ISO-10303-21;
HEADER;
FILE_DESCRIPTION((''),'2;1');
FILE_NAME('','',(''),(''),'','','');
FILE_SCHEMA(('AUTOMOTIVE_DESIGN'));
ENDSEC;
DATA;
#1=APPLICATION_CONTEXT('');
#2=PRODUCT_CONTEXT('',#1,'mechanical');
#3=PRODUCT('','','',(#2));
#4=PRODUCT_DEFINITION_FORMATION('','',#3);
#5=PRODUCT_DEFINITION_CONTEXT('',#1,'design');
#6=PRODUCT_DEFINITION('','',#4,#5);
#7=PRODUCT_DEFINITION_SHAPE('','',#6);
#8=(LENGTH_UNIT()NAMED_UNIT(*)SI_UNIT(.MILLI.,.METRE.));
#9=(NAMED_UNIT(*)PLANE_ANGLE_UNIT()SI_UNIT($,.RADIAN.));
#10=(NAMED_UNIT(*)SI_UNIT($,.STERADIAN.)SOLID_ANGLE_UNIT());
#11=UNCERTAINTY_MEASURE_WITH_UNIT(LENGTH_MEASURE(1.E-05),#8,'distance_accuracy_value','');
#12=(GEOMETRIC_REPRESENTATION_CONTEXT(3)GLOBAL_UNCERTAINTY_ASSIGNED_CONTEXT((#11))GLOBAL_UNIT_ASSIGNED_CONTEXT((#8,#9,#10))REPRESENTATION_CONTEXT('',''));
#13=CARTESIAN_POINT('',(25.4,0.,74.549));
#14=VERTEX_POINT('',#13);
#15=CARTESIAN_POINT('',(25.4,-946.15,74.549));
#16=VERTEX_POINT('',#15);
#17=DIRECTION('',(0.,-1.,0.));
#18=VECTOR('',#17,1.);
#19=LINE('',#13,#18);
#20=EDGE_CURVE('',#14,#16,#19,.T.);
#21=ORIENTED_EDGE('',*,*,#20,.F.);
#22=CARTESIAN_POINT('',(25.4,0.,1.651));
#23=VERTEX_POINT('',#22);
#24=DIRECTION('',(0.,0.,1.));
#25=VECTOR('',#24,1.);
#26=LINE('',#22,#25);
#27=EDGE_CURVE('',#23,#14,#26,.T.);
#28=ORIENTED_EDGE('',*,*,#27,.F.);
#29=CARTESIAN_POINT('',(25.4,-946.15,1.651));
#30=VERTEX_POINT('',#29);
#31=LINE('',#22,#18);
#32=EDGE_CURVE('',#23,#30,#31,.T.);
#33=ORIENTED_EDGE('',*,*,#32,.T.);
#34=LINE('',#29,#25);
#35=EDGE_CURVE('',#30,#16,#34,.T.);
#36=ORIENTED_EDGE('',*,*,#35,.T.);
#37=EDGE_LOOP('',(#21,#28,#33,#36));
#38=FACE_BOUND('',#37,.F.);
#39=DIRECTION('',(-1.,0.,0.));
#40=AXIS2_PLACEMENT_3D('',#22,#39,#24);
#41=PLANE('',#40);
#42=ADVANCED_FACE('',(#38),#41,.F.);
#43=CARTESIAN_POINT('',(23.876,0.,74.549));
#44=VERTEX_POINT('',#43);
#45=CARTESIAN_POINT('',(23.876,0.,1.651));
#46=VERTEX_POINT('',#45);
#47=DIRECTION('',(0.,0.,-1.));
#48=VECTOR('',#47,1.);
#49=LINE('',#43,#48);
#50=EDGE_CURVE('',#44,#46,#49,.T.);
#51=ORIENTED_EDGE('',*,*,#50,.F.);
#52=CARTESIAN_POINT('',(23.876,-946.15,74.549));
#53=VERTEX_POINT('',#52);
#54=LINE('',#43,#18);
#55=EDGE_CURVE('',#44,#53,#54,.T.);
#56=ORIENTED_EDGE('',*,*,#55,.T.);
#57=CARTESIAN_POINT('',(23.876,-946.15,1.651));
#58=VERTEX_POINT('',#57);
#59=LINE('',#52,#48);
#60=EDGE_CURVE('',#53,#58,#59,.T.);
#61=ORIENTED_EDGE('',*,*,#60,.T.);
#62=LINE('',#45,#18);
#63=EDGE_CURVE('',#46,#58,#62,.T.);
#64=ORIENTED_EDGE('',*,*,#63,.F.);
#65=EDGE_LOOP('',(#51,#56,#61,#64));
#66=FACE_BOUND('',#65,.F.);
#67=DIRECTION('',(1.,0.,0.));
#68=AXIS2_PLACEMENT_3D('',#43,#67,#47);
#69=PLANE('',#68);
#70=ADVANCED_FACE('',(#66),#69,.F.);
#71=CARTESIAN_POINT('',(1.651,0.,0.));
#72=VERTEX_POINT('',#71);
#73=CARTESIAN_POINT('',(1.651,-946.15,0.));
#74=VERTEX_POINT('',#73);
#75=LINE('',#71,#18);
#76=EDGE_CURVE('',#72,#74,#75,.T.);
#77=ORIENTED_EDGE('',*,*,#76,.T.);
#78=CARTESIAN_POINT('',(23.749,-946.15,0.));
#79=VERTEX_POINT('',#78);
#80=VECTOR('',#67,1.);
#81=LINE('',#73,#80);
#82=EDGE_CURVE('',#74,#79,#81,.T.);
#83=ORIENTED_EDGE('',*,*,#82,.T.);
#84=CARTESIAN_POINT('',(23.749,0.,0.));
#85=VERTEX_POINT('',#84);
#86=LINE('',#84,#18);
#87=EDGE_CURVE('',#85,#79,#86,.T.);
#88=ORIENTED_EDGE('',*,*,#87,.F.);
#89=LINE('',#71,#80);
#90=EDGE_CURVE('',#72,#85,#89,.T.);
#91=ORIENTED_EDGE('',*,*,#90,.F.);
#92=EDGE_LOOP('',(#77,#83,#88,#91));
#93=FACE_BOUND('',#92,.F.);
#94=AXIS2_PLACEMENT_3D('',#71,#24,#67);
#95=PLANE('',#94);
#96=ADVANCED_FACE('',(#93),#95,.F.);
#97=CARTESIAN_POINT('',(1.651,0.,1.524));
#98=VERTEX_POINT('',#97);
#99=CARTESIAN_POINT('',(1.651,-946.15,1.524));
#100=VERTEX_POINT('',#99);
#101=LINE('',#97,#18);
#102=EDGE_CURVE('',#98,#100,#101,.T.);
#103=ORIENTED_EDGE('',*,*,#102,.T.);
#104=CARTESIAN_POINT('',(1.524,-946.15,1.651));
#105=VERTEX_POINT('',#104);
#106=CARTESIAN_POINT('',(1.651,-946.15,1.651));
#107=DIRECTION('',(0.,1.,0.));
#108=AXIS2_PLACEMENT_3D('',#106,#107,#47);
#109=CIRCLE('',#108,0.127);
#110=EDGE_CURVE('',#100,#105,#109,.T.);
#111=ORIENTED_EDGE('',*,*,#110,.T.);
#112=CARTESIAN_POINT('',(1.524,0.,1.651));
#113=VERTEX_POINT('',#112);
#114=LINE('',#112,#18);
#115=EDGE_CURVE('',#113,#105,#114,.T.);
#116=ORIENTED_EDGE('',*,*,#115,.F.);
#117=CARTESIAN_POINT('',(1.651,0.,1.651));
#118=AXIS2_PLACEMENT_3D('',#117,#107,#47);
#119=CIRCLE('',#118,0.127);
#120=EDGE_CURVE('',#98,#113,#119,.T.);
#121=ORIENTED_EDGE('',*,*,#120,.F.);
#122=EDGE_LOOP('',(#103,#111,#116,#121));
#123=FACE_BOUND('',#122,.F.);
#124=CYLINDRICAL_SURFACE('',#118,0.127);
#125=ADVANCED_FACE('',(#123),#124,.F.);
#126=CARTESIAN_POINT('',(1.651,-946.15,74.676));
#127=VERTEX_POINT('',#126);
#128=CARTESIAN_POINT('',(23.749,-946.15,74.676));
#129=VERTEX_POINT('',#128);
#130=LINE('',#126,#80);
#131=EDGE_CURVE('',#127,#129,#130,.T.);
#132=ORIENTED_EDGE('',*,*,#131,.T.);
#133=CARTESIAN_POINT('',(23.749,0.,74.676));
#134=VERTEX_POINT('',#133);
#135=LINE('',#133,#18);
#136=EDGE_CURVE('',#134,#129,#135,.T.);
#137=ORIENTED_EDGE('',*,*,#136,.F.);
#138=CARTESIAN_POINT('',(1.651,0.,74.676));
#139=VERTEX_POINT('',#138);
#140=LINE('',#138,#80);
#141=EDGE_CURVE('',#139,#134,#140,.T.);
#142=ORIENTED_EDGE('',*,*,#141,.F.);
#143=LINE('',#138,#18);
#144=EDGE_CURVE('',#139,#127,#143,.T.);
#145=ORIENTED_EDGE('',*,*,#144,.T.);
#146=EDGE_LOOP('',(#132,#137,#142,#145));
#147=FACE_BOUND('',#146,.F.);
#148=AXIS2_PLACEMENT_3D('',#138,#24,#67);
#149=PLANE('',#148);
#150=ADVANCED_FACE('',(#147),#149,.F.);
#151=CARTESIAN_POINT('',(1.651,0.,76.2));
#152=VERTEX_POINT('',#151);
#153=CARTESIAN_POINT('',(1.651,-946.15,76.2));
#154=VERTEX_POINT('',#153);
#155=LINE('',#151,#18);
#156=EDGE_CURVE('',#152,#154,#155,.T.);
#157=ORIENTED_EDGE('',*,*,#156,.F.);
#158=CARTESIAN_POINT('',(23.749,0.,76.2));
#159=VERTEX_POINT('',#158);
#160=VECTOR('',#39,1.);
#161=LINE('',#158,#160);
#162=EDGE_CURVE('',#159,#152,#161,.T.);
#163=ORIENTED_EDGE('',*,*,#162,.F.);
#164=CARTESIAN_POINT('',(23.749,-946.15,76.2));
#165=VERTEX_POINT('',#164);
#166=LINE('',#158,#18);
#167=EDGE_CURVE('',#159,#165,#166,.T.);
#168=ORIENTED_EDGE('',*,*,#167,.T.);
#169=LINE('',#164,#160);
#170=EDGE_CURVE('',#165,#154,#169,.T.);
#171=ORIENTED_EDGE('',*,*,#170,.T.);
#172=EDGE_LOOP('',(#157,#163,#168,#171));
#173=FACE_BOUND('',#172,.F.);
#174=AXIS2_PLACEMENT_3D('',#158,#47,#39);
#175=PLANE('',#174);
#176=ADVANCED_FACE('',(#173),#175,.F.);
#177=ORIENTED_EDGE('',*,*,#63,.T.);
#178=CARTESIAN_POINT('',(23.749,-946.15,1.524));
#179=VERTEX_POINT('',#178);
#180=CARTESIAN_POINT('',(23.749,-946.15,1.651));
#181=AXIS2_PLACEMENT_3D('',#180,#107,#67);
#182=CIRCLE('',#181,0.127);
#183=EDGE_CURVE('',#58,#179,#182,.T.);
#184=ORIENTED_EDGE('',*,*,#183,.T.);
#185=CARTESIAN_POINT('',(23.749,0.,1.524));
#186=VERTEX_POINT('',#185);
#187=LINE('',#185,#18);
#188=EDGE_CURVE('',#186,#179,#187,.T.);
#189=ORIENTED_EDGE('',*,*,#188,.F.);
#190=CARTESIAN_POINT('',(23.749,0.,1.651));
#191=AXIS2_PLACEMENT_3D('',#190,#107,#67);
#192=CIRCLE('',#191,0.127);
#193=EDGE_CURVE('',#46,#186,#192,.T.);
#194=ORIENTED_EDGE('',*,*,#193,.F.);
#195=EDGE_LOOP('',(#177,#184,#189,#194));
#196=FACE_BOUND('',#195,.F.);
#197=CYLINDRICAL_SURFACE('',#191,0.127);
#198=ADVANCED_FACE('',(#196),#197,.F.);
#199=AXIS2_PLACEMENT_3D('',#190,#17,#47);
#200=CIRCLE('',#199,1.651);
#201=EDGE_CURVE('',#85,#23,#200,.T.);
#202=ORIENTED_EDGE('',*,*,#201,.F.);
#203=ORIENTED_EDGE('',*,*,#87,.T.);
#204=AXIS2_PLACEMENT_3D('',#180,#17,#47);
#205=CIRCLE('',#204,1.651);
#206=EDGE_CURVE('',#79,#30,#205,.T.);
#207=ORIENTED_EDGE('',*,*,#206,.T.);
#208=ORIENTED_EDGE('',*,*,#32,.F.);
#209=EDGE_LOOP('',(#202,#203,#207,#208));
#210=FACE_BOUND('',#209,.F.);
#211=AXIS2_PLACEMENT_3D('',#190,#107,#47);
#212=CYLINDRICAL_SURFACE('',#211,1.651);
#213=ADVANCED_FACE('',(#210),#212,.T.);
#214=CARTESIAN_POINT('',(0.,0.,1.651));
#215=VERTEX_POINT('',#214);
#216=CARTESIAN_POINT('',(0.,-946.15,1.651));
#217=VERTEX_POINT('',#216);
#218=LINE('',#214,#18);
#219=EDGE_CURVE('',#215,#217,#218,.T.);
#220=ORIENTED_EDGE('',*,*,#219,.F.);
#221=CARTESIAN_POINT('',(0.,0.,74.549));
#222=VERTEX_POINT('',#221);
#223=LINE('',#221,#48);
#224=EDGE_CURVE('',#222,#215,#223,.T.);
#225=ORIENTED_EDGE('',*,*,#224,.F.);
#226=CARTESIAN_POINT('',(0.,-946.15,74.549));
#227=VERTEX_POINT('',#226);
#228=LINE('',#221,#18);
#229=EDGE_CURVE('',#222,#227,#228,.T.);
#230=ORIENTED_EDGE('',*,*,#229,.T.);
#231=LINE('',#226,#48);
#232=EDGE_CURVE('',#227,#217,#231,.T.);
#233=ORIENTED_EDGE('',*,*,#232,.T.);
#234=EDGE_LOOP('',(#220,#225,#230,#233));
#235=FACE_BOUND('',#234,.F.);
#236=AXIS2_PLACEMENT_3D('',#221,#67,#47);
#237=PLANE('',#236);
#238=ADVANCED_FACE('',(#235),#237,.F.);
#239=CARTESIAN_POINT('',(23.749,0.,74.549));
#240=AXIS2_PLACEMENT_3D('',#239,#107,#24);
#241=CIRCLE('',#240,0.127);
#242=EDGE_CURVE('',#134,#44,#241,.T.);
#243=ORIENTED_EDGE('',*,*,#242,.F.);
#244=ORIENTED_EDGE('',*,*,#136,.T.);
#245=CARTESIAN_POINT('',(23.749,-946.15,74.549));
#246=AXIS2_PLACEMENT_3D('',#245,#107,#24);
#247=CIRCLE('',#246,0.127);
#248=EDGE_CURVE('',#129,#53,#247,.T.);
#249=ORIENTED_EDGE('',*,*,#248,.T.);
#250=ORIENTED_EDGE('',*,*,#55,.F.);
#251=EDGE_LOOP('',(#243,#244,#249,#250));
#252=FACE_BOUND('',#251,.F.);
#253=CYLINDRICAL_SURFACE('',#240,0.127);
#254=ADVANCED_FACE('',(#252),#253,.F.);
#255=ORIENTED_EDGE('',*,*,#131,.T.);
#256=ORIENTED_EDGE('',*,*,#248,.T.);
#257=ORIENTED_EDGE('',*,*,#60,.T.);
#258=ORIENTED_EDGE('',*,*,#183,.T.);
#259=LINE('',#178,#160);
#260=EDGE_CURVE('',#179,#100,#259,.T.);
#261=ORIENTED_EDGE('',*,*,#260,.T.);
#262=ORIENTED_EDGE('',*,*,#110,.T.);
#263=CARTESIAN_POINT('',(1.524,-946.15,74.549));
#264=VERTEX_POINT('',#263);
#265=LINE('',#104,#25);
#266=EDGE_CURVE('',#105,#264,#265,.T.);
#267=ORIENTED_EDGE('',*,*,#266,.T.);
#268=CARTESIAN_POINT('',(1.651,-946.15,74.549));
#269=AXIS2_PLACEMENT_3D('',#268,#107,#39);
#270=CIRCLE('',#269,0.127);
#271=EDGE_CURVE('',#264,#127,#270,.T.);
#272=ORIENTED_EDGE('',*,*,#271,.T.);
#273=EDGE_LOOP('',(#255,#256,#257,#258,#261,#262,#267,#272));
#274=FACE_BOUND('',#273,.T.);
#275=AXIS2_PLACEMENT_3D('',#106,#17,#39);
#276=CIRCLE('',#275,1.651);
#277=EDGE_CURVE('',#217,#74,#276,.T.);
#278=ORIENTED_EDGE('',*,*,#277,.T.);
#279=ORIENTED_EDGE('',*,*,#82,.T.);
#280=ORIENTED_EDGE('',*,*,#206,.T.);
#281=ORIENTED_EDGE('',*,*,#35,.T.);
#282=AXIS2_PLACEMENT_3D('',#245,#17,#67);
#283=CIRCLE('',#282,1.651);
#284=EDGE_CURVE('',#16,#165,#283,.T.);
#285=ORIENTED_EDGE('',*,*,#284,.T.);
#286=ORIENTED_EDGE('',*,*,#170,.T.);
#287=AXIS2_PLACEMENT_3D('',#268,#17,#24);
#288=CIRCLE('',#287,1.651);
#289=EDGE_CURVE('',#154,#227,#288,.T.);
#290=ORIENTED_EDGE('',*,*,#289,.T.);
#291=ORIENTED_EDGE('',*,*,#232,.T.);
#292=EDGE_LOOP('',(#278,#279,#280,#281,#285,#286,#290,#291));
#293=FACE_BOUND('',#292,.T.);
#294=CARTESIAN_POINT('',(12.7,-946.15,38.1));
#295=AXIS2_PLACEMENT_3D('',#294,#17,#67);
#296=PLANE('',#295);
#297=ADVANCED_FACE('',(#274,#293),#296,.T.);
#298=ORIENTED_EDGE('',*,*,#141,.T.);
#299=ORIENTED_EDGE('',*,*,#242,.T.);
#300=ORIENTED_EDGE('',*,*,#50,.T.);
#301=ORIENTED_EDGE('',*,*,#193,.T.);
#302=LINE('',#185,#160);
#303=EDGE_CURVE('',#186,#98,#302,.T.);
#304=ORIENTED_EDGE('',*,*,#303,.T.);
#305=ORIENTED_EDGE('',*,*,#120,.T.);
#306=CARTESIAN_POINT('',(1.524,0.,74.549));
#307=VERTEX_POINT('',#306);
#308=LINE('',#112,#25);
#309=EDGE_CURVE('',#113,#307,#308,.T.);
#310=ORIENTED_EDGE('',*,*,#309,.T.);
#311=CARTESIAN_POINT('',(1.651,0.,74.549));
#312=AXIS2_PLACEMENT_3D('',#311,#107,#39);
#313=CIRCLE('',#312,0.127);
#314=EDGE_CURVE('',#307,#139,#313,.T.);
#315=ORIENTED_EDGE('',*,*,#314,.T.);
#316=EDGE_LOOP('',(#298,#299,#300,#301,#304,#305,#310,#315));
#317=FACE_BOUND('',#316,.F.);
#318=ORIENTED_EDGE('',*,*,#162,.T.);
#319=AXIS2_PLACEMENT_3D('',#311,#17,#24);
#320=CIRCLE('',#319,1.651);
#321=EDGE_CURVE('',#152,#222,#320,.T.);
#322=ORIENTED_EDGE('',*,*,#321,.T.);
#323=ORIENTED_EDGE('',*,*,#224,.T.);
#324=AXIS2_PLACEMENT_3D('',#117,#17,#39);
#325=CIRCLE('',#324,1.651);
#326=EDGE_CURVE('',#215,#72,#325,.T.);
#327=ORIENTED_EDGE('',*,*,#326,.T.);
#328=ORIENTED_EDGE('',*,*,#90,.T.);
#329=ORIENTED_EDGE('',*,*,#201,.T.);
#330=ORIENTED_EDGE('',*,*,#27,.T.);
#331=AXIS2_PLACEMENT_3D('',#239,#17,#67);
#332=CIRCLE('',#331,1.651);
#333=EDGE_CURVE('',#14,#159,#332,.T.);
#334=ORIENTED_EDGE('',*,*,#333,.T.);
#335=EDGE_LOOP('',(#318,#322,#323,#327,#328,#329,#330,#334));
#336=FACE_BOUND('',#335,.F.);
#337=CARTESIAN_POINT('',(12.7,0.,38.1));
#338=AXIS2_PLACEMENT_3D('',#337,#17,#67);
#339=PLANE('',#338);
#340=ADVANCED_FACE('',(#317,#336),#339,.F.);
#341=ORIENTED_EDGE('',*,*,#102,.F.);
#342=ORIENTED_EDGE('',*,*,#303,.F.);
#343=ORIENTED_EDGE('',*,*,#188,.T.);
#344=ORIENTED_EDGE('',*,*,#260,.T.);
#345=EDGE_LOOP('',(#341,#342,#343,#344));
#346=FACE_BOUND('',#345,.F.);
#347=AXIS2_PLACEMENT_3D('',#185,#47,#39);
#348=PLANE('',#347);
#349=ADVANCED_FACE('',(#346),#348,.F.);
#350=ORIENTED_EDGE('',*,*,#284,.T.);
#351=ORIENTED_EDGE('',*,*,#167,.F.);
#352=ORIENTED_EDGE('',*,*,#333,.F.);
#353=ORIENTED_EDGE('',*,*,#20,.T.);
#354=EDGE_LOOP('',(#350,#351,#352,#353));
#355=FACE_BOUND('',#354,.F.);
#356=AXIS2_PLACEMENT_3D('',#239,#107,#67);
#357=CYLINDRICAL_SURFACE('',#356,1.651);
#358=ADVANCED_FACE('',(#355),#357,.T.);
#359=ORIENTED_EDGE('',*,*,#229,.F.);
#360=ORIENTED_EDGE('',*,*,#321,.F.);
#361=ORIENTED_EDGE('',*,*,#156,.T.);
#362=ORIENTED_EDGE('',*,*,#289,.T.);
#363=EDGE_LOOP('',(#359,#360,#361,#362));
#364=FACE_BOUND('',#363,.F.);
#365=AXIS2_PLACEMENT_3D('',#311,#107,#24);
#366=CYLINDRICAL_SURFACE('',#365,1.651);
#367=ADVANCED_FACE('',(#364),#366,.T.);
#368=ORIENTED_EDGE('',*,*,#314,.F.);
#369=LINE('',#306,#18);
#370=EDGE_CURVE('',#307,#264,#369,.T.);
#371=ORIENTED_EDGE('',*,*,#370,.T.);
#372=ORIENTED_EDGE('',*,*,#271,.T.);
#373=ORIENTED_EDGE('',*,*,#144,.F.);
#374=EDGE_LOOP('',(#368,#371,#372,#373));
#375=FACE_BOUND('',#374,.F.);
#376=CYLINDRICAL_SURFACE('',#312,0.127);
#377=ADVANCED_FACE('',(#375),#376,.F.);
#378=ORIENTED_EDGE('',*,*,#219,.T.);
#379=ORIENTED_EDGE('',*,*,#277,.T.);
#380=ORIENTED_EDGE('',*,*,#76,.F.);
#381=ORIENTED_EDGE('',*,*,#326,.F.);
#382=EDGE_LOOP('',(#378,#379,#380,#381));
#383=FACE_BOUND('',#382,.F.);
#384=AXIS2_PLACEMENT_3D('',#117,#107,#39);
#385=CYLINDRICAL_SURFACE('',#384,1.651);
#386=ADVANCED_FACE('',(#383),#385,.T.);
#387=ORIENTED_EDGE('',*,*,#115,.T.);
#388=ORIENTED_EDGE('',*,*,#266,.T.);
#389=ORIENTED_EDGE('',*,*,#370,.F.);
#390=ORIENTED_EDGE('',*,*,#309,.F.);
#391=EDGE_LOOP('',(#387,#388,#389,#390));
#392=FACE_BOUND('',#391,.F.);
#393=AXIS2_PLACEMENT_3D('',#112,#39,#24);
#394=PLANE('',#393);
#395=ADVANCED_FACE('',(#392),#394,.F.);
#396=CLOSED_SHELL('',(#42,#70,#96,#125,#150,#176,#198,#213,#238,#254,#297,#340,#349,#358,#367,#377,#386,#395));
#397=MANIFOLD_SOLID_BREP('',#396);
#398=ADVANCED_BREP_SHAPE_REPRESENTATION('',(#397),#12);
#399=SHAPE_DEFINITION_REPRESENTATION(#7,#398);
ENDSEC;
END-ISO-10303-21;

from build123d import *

# Parameters (mm, degrees)
F1_DEPTH = 946.15


# Not quite as in the source:
# - a feature names something its author has since deleted; it is built from what else it names


with BuildPart() as f1:
    # F0 (on Front) → F1 (new body)
    with BuildSketch(Plane.XZ):
        with BuildLine():
            ThreePointArc((0, 1.651), (0.4835667043, 0.4835667043), (1.651, 0))
            Line((1.651, 0), (23.749, 0))
            ThreePointArc((23.749, 0), (24.9164332957, 0.4835667043), (25.4, 1.651))
            Line((25.4, 1.651), (25.4, 74.549))
            ThreePointArc((25.4, 74.549), (24.9164332957, 75.7164332957), (23.749, 76.2))
            Line((23.749, 76.2), (1.651, 76.2))
            ThreePointArc((1.651, 76.2), (0.4835667043, 75.7164332957), (0, 74.549))
            Line((0, 74.549), (0, 1.651))
        make_face()
        with BuildLine():
            ThreePointArc((1.5240004182, 74.549), (1.5611977345, 74.6388022655), (1.651, 74.6759995818))
            Line((1.651, 74.6759995818), (23.749, 74.6759995818))
            ThreePointArc((23.749, 74.6759995818), (23.8388022655, 74.6388022655), (23.8759995818, 74.549))
            Line((23.8759995818, 74.549), (23.8759995818, 1.651))
            ThreePointArc((23.8759995818, 1.651), (23.8388022655, 1.5611977345), (23.749, 1.5240004182))
            Line((23.749, 1.5240004182), (1.651, 1.5240004182))
            ThreePointArc((1.651, 1.5240004182), (1.5611977345, 1.5611977345), (1.5240004182, 1.651))
            Line((1.5240004182, 1.651), (1.5240004182, 74.549))
        make_face(mode=Mode.SUBTRACT)
    extrude(amount=F1_DEPTH)


solid = f1.part
